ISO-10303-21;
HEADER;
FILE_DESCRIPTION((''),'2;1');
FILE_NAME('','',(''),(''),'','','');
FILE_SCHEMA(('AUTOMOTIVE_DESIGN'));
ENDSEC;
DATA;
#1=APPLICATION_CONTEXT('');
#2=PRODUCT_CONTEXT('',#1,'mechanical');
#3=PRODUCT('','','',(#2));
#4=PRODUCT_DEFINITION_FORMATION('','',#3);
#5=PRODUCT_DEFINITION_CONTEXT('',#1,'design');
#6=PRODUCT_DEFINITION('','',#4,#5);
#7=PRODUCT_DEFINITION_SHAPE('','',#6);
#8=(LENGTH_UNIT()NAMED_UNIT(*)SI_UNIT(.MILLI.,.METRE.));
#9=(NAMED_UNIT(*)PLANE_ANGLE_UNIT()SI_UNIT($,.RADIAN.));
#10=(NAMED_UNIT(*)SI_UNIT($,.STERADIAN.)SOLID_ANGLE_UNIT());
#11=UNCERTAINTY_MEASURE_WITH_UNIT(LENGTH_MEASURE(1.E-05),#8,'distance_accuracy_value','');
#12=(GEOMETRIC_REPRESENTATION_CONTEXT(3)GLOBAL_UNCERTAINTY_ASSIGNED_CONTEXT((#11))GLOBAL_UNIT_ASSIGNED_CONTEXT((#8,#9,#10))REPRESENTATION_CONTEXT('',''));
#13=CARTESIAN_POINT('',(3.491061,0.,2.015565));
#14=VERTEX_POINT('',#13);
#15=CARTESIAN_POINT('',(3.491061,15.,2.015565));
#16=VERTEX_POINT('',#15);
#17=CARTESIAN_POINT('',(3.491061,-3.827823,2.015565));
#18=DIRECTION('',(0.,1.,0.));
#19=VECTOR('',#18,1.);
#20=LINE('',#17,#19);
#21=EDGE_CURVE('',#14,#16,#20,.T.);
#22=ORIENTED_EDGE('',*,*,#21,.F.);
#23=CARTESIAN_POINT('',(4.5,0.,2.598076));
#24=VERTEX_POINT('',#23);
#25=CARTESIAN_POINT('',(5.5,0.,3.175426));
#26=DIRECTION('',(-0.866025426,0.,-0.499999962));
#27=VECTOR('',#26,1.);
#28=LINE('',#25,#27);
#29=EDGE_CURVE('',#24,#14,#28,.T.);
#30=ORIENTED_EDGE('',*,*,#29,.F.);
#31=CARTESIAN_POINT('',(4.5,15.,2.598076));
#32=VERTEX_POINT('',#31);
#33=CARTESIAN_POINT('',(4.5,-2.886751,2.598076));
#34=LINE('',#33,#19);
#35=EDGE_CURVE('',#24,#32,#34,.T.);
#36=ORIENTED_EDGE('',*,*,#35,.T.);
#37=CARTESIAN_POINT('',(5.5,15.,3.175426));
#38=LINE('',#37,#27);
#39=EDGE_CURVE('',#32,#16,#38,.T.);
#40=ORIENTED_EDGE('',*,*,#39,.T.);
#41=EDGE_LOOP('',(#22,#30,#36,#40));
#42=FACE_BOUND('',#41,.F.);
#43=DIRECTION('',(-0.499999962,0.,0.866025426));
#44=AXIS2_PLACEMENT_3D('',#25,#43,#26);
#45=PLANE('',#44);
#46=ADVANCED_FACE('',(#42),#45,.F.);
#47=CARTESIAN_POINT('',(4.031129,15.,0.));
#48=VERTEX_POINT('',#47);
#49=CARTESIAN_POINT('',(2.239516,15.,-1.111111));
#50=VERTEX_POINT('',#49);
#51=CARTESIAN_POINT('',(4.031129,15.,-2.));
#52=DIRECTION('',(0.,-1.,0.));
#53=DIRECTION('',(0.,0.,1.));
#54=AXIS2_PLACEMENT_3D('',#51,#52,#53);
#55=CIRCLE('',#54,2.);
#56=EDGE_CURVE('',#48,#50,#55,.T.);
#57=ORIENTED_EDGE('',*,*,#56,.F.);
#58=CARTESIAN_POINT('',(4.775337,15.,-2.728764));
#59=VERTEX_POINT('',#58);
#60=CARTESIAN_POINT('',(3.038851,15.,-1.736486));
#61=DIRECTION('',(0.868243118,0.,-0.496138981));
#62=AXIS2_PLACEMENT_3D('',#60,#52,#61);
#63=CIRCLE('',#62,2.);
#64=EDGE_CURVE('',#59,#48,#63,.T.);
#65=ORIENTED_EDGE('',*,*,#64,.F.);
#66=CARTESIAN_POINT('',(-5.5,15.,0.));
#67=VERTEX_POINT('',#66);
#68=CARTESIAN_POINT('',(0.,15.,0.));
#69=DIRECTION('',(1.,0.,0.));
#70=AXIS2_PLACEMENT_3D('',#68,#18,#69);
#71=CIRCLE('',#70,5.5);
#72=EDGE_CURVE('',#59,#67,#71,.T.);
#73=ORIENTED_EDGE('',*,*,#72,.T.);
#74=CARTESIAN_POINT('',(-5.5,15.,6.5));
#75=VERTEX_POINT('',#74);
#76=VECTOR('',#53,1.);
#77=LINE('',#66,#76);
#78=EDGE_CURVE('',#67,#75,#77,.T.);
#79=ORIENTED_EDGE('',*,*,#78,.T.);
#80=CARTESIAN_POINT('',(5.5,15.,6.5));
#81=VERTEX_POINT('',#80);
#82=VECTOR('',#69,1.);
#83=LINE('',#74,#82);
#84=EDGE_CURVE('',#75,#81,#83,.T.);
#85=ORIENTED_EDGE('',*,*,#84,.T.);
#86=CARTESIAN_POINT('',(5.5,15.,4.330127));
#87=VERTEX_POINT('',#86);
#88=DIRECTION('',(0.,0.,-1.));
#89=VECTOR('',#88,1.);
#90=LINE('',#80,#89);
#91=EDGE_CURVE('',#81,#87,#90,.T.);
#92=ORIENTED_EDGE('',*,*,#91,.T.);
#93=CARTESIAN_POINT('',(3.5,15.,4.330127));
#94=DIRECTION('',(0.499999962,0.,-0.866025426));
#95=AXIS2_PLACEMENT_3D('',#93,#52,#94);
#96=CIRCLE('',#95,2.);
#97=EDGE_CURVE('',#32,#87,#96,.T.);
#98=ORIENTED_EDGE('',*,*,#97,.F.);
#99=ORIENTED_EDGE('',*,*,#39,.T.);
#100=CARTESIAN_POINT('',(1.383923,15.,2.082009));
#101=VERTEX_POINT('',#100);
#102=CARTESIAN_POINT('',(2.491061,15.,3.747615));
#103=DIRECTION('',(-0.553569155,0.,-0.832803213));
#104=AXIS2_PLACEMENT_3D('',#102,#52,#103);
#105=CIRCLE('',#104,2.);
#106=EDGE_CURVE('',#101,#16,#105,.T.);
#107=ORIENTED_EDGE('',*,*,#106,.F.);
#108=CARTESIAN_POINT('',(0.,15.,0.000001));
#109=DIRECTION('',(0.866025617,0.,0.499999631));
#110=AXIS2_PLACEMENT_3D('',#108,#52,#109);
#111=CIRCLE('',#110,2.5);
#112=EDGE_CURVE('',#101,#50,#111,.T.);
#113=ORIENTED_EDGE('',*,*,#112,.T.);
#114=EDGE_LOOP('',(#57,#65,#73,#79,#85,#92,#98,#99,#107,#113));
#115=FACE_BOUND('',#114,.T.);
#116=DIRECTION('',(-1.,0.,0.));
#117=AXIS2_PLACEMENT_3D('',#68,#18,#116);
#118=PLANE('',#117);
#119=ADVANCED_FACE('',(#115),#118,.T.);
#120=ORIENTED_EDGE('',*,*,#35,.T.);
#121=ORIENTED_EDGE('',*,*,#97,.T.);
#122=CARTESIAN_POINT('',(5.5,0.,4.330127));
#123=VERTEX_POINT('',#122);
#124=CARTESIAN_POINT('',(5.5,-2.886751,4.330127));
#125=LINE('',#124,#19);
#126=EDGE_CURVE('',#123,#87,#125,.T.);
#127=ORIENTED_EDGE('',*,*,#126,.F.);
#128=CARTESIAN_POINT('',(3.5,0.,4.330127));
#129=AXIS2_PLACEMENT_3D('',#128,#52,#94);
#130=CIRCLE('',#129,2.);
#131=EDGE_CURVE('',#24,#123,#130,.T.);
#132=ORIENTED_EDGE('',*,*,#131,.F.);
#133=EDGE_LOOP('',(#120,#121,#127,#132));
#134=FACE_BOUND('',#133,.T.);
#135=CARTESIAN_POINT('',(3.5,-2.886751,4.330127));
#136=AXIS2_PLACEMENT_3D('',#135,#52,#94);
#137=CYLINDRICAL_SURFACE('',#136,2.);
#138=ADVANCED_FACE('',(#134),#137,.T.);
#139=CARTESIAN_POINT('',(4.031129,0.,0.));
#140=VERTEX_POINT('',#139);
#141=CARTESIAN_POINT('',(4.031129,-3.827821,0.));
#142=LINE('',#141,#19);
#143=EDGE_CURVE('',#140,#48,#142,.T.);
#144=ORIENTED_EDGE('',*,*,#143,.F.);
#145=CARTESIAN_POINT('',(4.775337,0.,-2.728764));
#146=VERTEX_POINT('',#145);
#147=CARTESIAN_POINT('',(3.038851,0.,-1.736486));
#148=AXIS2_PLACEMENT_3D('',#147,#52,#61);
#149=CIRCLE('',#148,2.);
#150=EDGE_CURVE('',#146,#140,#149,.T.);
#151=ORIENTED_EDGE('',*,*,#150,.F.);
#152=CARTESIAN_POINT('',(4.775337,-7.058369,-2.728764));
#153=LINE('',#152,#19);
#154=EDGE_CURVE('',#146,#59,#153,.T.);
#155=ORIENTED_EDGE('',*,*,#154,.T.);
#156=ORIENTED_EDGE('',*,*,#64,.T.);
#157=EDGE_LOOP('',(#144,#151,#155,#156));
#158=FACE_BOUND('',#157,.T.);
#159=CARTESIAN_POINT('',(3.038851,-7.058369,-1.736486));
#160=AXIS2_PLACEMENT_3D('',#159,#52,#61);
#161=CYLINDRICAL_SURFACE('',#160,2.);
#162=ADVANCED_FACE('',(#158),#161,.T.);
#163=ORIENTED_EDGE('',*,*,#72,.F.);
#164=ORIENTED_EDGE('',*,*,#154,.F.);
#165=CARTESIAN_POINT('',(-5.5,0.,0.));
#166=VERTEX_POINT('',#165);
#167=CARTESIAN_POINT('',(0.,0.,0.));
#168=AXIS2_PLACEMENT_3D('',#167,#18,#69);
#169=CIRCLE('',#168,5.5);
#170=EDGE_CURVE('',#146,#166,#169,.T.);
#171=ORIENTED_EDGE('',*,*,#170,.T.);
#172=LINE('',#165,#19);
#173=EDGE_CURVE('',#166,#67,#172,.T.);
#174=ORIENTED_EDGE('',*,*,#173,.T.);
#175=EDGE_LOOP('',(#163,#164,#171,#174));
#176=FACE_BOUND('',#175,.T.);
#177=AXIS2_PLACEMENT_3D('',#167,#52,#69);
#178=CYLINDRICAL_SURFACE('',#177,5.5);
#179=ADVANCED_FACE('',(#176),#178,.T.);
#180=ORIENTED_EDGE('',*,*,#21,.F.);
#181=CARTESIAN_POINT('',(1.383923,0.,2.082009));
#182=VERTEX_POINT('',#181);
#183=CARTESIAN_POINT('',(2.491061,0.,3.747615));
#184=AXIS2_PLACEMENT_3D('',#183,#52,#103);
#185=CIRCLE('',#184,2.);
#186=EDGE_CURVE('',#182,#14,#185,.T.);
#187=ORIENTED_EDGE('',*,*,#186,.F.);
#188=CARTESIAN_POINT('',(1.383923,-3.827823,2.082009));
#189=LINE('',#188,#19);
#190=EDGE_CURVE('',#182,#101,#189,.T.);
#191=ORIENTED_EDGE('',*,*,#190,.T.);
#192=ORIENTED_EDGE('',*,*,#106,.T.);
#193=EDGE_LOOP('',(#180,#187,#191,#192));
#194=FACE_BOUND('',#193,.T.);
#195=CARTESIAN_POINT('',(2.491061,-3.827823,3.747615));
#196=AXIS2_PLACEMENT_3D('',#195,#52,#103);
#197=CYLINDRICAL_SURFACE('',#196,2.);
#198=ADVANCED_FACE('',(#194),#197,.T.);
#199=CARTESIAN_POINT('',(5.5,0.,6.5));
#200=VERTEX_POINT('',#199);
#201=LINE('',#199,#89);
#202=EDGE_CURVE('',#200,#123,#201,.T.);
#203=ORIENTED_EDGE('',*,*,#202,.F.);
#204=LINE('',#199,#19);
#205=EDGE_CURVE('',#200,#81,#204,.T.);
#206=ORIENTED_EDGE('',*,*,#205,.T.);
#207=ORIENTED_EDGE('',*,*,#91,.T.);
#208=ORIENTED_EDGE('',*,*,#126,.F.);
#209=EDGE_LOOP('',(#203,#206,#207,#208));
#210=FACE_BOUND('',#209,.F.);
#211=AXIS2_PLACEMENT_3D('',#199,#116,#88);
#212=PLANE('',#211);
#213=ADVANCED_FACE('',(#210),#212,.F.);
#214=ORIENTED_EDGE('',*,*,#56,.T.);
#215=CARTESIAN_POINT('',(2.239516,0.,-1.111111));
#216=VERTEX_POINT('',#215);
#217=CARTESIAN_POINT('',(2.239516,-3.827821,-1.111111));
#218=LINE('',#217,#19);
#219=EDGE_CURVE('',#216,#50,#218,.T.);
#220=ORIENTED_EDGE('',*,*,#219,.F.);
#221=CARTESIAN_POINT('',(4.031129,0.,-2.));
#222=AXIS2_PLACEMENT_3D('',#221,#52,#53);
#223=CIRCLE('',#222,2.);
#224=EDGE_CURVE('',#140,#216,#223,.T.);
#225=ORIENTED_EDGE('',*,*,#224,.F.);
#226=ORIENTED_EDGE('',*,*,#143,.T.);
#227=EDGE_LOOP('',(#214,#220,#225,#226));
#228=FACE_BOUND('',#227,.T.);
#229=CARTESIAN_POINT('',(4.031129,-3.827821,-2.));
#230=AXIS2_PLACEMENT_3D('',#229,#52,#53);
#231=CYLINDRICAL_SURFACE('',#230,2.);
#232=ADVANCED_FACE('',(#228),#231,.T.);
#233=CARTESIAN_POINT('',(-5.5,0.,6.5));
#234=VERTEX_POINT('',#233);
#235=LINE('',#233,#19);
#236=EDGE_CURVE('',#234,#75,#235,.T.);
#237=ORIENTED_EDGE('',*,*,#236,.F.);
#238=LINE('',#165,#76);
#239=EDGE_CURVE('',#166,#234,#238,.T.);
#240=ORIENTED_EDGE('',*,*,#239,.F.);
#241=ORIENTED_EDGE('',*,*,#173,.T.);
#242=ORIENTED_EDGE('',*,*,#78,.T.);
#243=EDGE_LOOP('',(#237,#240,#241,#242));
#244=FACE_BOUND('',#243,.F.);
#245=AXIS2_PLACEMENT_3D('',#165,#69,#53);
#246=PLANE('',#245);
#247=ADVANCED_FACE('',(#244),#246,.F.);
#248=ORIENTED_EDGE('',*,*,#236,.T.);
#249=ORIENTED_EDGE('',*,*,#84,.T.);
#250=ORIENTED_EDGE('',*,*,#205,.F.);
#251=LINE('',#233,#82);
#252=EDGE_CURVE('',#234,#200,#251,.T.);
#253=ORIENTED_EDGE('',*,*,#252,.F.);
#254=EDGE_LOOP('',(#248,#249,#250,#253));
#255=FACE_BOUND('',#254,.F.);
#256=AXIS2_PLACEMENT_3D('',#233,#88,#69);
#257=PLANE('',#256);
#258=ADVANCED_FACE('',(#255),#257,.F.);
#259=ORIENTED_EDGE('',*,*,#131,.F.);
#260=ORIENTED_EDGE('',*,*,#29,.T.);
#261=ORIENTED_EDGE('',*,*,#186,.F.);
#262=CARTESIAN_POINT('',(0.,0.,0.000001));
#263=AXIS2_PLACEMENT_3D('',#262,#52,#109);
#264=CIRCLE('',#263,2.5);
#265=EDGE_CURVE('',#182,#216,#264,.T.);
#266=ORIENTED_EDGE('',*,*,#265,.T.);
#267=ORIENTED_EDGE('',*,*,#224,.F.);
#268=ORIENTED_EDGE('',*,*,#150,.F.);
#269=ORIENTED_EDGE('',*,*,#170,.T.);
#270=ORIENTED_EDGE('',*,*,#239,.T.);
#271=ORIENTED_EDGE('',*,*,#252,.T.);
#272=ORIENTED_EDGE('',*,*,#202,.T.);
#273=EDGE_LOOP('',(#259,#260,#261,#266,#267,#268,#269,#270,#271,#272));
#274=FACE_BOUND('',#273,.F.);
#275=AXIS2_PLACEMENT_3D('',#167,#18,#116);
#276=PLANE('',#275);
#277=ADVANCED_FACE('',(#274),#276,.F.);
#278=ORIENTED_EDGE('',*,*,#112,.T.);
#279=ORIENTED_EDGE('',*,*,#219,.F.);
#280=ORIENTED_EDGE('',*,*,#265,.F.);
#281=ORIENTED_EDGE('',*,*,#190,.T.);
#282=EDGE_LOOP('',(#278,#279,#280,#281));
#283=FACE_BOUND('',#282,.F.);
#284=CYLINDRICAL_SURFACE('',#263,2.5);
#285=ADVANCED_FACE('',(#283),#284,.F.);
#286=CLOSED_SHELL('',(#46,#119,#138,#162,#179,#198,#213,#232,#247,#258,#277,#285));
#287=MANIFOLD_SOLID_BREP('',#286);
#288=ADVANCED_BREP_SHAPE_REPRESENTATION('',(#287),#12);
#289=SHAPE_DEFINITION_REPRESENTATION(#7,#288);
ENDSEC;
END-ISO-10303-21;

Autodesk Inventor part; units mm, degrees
ref_plane "YZ Plane" through (0, 0, 0) normal (1, 0, 0) x (0, 1, 0)
ref_plane "XZ Plane" through (0, 0, 0) normal (0, 1, 0) x (-1, 0, 0)
ref_plane "XY Plane" through (0, 0, 0) normal (0, 0, 1) x (1, 0, 0)
sketch "Sketch1" plane through (0, 0, 0) normal (0, 1, 0) x (-1, 0, 0)
  circle A0 centre (0, 0) radius 2.5
  circle A1 centre (0, 0) radius 5.5
  line L0 (5.5, 5.5) -> (-5.5, 5.5)
  line L1 (-5.5, 5.5) -> (-5.5, 6.5)
  line L2 (-5.5, 6.5) -> (5.5, 6.5)
  line L3 (5.5, 6.5) -> (5.5, 5.5)
  line L4 (0, -7.9) -> (0, 8.9) construction
  line L5 (0, 0) -> (-5.5, 3.175426)
  line L6 (0, 0) -> (-5.5, 0)
  line L7 (5.5, 0) -> (5.5, 5.5)
  line L8 (-5.5, 0) -> (-5.5, 5.5)
  point P0 (-2.5, 0)
  point P1 (0, 5.5)
  point P2 (-2.165064, 1.25)
  dimension "d0" = 5
  dimension "d1" = 3
  dimension "d4" = 30
  dimension "d5" = 1
sketch "Sketch1 outline for Extrusion1" plane through (0, 0, 0) normal (0, 1, 0) x (-1, 0, 0)
  line L0 (5.5, 0) -> (5.5, 6.5)
  line L1 (5.5, 6.5) -> (-5.5, 6.5)
  line L2 (-5.5, 6.5) -> (-5.5, 3.175426)
  line L3 (-5.5, 3.175426) -> (-2.165064, 1.25)
  arc A0 (-2.165064, 1.25) -> (-2.5, 0) centre (0, 0) cw
  line L4 (-2.5, 0) -> (-5.5, 0)
  arc A1 (-5.5, 0) -> (5.5, 0) centre (0, 0) ccw
extrude "Extrusion1" add sketch "Sketch1 outline for Extrusion1" along normal blind 15
fillet "Fillet1" radius 2 4 edges at (5.5, 7.5, 3.1754) (2.1651, 7.5, 1.25) (2.5, 7.5, 0) (5.5, 7.5, 0)
properties part number "Cable Clip"
